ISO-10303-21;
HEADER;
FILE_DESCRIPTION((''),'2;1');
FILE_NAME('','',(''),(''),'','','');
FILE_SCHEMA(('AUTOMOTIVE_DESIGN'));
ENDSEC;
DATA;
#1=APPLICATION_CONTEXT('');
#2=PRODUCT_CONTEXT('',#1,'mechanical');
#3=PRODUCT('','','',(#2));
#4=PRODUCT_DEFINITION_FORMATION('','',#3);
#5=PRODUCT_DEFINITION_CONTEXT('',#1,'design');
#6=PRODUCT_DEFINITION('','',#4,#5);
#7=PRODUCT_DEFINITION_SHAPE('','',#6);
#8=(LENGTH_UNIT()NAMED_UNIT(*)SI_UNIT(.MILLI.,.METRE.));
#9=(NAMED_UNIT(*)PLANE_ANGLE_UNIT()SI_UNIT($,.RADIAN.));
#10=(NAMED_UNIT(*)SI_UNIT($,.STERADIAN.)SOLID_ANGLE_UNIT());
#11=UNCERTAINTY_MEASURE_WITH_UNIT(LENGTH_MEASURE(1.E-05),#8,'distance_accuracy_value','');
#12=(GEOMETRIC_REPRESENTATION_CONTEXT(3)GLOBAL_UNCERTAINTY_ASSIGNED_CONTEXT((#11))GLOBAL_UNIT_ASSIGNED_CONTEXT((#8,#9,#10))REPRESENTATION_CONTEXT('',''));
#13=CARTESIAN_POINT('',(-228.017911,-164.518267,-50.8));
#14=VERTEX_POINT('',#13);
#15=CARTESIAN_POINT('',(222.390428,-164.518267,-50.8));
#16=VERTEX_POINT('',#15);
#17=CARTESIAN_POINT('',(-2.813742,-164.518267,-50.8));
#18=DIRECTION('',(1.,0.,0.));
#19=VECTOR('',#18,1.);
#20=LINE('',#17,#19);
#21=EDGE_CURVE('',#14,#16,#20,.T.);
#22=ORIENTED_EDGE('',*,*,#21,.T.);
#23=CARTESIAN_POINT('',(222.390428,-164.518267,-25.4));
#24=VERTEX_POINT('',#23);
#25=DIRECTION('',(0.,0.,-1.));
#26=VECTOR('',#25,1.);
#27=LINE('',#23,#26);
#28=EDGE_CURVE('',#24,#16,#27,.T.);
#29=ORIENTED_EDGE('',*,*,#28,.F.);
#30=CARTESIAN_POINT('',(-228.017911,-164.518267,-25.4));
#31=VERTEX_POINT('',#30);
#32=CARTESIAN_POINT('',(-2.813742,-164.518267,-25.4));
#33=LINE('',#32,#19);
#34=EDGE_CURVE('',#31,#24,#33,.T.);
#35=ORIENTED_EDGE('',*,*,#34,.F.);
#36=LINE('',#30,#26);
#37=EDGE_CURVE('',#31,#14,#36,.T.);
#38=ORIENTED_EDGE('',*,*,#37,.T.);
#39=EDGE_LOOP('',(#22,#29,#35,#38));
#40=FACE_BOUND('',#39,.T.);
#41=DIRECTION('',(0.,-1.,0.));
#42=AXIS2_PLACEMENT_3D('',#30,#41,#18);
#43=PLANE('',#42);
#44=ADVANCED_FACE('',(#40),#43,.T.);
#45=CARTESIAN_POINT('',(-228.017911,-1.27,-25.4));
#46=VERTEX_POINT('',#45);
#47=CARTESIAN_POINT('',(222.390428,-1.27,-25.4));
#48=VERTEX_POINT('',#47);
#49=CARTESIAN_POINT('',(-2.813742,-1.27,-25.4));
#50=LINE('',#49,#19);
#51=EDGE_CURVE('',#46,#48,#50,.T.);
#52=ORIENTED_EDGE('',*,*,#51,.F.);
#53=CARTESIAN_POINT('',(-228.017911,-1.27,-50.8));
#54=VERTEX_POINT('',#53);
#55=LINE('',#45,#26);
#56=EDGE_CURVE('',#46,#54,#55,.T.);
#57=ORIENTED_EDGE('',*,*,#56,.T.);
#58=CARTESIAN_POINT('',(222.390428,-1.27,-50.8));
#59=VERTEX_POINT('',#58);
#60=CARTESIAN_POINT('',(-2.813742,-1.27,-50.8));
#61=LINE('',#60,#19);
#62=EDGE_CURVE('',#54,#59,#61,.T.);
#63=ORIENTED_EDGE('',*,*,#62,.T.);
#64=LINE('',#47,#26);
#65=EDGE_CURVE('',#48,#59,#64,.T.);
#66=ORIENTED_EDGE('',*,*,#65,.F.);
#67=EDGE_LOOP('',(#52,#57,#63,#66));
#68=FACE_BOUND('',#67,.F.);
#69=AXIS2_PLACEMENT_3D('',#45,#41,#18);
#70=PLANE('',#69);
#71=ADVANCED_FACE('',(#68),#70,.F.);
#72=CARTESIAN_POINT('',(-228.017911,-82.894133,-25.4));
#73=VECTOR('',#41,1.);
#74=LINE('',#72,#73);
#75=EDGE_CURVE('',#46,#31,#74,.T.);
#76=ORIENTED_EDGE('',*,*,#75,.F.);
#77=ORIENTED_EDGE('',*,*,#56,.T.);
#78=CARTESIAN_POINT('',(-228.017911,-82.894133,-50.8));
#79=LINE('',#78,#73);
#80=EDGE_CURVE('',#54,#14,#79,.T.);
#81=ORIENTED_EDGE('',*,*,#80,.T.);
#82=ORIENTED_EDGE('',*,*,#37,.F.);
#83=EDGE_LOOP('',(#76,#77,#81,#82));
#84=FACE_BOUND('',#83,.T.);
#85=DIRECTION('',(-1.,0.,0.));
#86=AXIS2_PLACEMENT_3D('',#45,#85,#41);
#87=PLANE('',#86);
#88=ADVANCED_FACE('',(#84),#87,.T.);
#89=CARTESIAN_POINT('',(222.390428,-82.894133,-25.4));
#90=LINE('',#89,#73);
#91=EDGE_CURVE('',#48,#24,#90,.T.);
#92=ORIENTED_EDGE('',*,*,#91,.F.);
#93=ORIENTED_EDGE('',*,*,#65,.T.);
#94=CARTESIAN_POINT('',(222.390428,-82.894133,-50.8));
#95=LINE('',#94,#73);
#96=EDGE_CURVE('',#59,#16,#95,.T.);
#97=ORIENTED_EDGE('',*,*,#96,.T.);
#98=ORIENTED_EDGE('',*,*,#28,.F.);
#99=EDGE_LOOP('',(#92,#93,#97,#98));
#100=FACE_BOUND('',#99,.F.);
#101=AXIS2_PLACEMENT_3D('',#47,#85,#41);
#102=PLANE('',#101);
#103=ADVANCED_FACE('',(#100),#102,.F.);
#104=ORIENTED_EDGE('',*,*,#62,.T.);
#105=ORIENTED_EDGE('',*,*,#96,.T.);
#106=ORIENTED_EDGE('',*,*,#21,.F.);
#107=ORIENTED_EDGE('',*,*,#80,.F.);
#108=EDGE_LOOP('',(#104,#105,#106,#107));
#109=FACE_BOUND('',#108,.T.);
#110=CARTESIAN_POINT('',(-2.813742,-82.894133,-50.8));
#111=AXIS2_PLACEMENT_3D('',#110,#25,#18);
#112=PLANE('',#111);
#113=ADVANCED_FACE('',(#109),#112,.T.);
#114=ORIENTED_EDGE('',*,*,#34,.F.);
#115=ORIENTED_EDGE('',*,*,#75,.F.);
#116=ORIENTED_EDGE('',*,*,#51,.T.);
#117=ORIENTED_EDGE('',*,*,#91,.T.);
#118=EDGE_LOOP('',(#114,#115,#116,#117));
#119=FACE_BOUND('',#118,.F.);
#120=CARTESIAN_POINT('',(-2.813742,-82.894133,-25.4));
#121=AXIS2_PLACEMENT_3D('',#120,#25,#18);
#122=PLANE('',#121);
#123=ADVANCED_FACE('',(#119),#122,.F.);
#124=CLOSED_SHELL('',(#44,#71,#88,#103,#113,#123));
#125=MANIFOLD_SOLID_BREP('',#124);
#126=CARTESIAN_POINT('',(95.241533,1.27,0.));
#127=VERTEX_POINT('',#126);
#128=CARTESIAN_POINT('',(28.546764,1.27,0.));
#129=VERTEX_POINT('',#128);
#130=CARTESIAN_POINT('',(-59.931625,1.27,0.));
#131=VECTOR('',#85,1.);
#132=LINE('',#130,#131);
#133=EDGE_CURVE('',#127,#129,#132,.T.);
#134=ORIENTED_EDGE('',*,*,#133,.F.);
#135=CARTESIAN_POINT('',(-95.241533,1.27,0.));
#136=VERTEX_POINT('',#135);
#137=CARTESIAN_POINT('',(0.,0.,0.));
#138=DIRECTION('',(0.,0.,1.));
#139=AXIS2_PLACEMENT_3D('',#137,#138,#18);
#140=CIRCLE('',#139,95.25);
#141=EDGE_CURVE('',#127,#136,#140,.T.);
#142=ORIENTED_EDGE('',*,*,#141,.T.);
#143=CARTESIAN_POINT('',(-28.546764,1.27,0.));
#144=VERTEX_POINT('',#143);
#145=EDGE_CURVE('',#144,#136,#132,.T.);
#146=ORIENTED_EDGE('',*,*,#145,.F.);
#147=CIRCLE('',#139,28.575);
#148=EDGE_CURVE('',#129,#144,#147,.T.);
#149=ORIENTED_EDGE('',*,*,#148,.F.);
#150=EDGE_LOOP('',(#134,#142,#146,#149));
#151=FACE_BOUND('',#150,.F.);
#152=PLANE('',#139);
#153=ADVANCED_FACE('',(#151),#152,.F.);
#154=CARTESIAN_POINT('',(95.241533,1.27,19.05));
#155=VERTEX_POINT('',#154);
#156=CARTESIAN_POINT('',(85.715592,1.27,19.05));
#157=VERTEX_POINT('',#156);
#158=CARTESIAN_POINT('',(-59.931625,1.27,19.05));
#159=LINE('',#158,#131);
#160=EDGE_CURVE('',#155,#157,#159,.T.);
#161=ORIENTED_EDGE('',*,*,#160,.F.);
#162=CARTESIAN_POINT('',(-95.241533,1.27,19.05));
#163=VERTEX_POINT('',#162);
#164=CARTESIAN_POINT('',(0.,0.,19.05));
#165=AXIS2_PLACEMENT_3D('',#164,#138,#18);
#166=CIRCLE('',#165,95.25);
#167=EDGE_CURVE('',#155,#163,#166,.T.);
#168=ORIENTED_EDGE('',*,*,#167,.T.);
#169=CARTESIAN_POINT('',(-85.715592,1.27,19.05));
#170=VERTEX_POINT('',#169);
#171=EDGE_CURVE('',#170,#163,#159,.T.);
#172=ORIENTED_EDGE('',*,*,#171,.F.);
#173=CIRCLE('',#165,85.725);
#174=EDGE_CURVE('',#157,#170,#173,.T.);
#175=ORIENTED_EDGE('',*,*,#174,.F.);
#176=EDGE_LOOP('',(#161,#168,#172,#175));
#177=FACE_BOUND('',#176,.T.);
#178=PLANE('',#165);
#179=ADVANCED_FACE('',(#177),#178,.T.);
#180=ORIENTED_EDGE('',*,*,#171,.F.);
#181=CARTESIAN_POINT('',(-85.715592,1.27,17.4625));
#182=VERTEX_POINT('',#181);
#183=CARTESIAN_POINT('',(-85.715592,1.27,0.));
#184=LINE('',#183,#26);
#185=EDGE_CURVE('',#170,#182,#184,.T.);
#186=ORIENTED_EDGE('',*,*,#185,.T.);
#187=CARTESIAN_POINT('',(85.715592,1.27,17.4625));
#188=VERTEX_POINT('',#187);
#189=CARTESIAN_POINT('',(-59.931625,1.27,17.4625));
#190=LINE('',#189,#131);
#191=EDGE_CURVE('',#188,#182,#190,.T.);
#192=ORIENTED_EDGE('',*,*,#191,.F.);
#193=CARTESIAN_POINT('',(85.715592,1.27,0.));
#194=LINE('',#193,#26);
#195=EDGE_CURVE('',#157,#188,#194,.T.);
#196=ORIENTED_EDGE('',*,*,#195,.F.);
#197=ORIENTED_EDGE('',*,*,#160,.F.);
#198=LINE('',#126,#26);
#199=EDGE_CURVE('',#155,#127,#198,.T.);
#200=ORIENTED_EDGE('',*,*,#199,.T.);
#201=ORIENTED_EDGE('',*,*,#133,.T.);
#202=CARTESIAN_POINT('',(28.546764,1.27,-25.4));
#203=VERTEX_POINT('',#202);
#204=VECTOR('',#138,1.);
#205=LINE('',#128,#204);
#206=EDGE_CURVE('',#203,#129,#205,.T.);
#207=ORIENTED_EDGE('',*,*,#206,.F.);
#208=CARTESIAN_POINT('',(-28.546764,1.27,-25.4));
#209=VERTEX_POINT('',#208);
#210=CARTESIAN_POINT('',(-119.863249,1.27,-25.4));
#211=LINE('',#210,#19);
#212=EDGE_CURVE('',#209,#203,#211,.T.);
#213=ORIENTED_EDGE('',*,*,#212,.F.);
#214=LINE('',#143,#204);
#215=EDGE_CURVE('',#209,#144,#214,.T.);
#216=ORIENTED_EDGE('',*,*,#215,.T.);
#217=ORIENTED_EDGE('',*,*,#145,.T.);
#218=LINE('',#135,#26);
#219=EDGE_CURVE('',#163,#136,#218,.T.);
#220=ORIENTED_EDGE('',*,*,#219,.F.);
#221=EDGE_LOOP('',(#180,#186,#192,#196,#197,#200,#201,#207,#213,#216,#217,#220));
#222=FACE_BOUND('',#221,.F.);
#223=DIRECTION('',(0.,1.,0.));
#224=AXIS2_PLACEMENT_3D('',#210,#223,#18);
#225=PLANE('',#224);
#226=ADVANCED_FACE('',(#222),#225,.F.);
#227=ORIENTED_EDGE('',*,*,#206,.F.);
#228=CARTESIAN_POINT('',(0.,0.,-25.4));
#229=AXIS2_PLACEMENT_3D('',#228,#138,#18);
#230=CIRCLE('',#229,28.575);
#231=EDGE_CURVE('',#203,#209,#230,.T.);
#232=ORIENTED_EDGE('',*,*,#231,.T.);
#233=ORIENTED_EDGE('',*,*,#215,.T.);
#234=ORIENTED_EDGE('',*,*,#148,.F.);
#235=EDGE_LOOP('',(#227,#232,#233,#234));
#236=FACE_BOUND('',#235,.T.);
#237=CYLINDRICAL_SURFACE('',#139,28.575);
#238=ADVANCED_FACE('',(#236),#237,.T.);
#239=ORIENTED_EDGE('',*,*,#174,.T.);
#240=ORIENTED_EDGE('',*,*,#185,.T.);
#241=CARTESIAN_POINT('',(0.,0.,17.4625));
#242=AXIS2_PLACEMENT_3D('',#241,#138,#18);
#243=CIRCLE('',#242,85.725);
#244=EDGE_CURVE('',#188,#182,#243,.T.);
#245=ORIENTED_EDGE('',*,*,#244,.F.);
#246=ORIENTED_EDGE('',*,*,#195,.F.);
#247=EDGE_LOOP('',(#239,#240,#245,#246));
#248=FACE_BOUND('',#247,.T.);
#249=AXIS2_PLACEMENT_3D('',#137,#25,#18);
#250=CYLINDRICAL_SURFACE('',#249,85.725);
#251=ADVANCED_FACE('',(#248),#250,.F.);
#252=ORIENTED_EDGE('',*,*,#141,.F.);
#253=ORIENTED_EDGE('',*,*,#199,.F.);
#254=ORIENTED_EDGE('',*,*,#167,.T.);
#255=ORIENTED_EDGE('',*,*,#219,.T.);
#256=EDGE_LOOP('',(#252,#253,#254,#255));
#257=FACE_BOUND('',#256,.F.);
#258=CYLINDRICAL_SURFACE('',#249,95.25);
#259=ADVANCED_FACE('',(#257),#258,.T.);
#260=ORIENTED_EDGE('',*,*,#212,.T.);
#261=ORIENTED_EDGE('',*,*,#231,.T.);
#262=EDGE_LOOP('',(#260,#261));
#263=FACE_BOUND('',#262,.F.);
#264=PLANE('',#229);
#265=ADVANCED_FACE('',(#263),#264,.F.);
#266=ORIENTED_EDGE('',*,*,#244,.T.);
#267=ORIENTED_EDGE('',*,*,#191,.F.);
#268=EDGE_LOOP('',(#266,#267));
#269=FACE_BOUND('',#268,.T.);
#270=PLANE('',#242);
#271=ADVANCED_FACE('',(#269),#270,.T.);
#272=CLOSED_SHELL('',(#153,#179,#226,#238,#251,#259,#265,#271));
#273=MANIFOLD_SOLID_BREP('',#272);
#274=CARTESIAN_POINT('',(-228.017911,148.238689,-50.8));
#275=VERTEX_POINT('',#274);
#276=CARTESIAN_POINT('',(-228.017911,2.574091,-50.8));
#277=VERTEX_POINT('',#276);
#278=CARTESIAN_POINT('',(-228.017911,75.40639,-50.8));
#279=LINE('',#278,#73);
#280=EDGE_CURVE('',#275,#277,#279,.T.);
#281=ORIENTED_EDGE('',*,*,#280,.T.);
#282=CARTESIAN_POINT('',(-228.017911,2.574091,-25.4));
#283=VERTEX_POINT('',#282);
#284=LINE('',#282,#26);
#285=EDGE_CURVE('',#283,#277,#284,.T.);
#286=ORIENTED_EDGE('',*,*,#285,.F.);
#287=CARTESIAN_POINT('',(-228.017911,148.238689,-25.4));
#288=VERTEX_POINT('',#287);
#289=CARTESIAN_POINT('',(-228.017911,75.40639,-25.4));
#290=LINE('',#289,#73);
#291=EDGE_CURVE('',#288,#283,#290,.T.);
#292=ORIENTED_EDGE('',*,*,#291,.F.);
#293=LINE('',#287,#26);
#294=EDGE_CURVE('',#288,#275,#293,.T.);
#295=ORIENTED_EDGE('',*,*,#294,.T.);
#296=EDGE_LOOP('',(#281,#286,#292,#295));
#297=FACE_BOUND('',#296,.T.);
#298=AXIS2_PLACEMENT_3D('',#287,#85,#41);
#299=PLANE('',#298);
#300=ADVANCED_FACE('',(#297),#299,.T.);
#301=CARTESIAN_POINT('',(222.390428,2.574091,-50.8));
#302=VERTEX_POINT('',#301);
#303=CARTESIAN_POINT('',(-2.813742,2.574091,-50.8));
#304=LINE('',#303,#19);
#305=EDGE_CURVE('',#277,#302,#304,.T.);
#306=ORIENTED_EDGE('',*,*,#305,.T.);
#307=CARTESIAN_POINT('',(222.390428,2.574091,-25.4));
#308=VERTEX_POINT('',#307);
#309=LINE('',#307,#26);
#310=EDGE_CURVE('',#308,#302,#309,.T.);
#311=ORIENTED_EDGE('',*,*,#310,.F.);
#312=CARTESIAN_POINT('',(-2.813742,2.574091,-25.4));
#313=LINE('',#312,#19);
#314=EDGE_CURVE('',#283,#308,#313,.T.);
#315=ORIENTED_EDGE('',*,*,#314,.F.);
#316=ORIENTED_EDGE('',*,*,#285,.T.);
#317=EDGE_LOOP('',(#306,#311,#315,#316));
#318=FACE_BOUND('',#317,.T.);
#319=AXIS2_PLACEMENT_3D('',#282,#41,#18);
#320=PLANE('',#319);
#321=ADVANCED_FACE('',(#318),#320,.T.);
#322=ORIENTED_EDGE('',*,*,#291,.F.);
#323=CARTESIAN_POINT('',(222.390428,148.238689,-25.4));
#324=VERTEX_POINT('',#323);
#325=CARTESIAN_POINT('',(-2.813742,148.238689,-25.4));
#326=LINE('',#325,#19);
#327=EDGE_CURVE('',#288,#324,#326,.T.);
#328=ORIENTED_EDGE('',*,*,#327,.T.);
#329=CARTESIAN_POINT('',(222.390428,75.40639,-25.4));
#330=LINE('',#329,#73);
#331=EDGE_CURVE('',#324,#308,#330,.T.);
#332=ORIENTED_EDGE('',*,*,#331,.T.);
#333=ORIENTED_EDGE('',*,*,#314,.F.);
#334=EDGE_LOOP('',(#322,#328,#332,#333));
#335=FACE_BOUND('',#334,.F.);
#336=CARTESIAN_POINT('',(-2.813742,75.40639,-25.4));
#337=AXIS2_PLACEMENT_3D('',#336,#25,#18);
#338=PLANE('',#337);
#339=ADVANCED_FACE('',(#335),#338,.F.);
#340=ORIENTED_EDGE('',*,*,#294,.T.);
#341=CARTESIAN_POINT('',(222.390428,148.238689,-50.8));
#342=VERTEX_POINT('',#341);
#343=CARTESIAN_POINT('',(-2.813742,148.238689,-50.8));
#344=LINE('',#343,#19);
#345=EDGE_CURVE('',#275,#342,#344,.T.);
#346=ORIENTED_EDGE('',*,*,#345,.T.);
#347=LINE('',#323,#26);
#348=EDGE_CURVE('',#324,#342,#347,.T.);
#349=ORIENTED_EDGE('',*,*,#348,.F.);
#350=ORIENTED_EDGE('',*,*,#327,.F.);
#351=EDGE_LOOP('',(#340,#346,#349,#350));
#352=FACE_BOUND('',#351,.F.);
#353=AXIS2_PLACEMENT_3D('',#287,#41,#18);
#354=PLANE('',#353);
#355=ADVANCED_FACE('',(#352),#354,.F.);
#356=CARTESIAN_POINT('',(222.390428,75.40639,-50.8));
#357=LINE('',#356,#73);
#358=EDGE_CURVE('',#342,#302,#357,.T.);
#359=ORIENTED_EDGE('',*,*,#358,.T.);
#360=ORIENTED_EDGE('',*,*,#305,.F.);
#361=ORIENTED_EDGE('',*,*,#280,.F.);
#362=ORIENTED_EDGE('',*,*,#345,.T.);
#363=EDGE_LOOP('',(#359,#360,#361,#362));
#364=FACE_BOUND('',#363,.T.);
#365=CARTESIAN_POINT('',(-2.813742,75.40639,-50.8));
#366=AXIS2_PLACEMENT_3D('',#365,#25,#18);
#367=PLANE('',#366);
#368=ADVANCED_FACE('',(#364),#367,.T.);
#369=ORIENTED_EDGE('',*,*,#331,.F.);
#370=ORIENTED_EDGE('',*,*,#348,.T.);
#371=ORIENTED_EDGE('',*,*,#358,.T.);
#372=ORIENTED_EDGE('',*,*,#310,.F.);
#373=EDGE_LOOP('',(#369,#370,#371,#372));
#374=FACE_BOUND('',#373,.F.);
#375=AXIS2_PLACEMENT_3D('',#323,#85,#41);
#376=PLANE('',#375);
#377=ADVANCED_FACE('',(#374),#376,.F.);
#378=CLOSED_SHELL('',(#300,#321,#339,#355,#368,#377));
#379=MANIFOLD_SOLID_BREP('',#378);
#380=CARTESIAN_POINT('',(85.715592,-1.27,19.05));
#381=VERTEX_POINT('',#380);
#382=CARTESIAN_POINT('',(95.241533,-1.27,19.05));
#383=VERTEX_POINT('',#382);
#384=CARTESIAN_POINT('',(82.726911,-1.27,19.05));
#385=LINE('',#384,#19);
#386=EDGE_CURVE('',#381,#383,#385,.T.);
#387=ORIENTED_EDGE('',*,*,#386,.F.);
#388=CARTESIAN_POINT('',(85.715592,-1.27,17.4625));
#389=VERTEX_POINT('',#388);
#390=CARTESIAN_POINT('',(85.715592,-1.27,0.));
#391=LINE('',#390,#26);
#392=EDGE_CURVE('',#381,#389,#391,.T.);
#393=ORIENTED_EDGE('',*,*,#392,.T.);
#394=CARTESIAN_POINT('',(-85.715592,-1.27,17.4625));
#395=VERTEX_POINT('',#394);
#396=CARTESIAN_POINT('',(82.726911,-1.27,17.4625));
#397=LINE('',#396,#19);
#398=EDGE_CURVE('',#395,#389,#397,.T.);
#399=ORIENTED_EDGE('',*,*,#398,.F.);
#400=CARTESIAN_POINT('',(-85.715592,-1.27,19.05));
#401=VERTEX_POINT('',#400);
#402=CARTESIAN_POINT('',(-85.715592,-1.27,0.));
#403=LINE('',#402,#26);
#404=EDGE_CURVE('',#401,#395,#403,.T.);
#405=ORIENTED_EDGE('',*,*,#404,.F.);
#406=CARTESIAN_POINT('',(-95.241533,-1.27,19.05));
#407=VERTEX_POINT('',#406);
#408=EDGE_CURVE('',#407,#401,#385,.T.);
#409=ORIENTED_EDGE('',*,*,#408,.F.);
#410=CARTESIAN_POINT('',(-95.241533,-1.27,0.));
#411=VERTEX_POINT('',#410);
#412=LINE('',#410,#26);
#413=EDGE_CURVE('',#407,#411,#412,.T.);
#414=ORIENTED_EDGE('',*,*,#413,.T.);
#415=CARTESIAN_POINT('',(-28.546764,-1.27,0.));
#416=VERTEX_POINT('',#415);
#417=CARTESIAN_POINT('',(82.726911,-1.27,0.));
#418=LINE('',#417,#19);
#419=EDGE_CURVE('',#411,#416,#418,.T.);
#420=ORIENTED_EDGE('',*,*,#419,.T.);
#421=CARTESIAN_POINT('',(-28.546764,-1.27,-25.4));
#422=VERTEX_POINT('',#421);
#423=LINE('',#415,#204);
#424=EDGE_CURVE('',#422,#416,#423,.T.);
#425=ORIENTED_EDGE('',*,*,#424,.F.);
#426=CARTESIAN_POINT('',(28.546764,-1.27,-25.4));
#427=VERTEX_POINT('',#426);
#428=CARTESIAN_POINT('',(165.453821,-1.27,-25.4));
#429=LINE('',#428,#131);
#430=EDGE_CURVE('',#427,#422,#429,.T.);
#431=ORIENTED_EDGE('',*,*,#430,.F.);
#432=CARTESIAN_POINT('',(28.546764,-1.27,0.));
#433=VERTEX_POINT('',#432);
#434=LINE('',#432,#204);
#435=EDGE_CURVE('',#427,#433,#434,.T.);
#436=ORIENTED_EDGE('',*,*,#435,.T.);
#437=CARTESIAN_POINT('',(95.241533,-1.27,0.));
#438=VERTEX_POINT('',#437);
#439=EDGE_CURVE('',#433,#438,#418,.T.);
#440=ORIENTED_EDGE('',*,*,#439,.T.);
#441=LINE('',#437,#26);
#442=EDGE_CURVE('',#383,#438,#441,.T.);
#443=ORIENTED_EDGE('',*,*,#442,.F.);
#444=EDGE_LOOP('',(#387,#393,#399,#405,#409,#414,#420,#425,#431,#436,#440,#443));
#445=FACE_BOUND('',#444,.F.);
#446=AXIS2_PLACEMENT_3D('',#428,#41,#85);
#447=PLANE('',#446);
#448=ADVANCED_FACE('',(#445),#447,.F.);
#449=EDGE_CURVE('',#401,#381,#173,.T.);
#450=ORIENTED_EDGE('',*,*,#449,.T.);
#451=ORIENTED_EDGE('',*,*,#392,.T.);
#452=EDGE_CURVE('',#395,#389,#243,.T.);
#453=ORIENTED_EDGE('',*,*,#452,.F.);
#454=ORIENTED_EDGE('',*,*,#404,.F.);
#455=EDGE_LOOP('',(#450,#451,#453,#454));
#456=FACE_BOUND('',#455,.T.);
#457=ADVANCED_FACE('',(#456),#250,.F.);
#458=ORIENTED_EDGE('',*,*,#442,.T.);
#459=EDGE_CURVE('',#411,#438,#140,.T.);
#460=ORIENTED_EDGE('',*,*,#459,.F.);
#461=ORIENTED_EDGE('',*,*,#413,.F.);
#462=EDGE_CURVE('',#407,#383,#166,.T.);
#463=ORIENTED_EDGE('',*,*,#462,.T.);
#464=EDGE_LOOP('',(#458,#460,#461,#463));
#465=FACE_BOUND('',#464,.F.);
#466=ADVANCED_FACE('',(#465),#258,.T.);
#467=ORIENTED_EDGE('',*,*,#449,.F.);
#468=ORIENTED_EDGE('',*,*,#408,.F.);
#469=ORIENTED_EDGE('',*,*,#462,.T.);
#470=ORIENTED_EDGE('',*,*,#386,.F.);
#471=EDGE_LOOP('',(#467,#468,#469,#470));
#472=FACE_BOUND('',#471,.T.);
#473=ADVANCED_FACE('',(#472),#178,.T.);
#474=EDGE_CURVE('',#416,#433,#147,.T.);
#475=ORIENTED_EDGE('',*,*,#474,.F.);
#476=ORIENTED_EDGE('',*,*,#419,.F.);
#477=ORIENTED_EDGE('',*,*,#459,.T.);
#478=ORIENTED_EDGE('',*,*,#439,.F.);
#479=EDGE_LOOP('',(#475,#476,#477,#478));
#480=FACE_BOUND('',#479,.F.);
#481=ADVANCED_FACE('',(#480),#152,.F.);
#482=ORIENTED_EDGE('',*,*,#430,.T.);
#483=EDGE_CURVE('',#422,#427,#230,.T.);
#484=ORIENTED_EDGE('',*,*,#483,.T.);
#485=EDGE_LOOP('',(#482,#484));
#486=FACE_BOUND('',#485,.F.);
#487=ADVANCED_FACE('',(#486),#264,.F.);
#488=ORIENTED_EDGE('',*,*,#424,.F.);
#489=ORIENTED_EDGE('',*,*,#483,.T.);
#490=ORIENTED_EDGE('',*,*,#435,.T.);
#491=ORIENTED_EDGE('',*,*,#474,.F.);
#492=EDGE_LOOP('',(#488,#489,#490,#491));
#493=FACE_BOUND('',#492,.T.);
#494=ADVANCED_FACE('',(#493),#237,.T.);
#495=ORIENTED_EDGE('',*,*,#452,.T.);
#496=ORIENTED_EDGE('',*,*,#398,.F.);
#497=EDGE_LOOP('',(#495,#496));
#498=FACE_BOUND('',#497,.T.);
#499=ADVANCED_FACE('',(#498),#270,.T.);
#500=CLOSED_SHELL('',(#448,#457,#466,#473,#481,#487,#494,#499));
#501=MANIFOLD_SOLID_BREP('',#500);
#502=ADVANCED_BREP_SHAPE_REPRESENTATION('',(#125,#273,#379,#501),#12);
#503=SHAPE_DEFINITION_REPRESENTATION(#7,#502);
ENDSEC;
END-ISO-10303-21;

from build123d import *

# Parameters (mm, degrees)
F0_R     = 95.25
F0_R_2   = 85.725
F1_DEPTH = 19.05
F0_R_3   = 28.575
F2_DEPTH = 17.4625
F3_DEPTH = 25.4
F5_DEPTH = 44.451
F6_W     = 450.4083395004
F6_H     = 145.6645973958
F7_DEPTH = 25.4
F6_H_2   = 163.2482669163


# Not quite as in the source:
# - a feature of the source that left no trace in its solid (it failed there, or was rolled back) is left out


with BuildPart() as f1:
    # F0 (on Top) → F1 (new body)
    with BuildSketch(Plane.XY):
        Circle(F0_R)
        Circle(F0_R_2, mode=Mode.SUBTRACT)
    extrude(amount=F1_DEPTH)

    # F0 (on Top) → F2 (join)
    with BuildSketch(Plane.XY):
        Circle(F0_R_2)
        Circle(F0_R_3, mode=Mode.SUBTRACT)
        Circle(F0_R_3)
    extrude(amount=F2_DEPTH)

    # F0 (on Top) → F3 (join)
    with BuildSketch(Plane.XY):
        Circle(F0_R_3)
    extrude(amount=-F3_DEPTH)

    # F4 (on face) → F5 (cut, through all)
    with BuildSketch(Plane(origin=(0, 0, -25.4), x_dir=(1, 0, 0), z_dir=(0, 0, -1))):
        with BuildLine():
            Line((165.4538214207, -1.27), (165.4538214207, 0))
            Line((165.4538214207, 0), (165.4538214207, 1.27))
            Line((165.4538214207, 1.27), (28.5467638271, 1.27))
            ThreePointArc((28.5467638271, 1.27), (28.5679400846, 0.6351569258), (28.575, 0))
            ThreePointArc((28.575, 0), (28.5679400846, -0.6351569258), (28.5467638271, -1.27))
            Line((28.5467638271, -1.27), (165.4538214207, -1.27))
        make_face()
        with BuildLine():
            Line((-28.5467638271, -1.27), (28.5467638271, -1.27))
            ThreePointArc((28.5467638271, -1.27), (28.5679400846, -0.6351569258), (28.575, 0))
            ThreePointArc((28.575, 0), (28.5679400846, 0.6351569258), (28.5467638271, 1.27))
            Line((28.5467638271, 1.27), (-28.5467638271, 1.27))
            ThreePointArc((-28.5467638271, 1.27), (-28.575, 0), (-28.5467638271, -1.27))
        make_face()
        with BuildLine():
            Line((-119.8632493615, -1.27), (-28.5467638271, -1.27))
            ThreePointArc((-28.5467638271, -1.27), (-28.575, 0), (-28.5467638271, 1.27))
            Line((-28.5467638271, 1.27), (-119.8632493615, 1.27))
            Line((-119.8632493615, 1.27), (-119.8632493615, -1.27))
        make_face()
    extrude(amount=-F5_DEPTH, mode=Mode.SUBTRACT)


with BuildPart() as f7:
    # F6 (on face) → F7 (new body)
    with BuildSketch(Plane(origin=(0, 0, -25.4), x_dir=(1, 0, 0), z_dir=(0, 0, -1))):
        with Locations((-2.8137415648, -75.4063900094)):
            Rectangle(F6_W, F6_H)
    extrude(amount=F7_DEPTH)


with BuildPart() as f7b:
    # F6 (on face) → F7, piece 2 (new body)
    with BuildSketch(Plane(origin=(0, 0, -25.4), x_dir=(1, 0, 0), z_dir=(0, 0, -1))):
        with Locations((-2.8137415648, 82.8941334581)):
            Rectangle(F6_W, F6_H_2)
    extrude(amount=F7_DEPTH)


solid = Compound([f1.part, f7.part, f7b.part])
